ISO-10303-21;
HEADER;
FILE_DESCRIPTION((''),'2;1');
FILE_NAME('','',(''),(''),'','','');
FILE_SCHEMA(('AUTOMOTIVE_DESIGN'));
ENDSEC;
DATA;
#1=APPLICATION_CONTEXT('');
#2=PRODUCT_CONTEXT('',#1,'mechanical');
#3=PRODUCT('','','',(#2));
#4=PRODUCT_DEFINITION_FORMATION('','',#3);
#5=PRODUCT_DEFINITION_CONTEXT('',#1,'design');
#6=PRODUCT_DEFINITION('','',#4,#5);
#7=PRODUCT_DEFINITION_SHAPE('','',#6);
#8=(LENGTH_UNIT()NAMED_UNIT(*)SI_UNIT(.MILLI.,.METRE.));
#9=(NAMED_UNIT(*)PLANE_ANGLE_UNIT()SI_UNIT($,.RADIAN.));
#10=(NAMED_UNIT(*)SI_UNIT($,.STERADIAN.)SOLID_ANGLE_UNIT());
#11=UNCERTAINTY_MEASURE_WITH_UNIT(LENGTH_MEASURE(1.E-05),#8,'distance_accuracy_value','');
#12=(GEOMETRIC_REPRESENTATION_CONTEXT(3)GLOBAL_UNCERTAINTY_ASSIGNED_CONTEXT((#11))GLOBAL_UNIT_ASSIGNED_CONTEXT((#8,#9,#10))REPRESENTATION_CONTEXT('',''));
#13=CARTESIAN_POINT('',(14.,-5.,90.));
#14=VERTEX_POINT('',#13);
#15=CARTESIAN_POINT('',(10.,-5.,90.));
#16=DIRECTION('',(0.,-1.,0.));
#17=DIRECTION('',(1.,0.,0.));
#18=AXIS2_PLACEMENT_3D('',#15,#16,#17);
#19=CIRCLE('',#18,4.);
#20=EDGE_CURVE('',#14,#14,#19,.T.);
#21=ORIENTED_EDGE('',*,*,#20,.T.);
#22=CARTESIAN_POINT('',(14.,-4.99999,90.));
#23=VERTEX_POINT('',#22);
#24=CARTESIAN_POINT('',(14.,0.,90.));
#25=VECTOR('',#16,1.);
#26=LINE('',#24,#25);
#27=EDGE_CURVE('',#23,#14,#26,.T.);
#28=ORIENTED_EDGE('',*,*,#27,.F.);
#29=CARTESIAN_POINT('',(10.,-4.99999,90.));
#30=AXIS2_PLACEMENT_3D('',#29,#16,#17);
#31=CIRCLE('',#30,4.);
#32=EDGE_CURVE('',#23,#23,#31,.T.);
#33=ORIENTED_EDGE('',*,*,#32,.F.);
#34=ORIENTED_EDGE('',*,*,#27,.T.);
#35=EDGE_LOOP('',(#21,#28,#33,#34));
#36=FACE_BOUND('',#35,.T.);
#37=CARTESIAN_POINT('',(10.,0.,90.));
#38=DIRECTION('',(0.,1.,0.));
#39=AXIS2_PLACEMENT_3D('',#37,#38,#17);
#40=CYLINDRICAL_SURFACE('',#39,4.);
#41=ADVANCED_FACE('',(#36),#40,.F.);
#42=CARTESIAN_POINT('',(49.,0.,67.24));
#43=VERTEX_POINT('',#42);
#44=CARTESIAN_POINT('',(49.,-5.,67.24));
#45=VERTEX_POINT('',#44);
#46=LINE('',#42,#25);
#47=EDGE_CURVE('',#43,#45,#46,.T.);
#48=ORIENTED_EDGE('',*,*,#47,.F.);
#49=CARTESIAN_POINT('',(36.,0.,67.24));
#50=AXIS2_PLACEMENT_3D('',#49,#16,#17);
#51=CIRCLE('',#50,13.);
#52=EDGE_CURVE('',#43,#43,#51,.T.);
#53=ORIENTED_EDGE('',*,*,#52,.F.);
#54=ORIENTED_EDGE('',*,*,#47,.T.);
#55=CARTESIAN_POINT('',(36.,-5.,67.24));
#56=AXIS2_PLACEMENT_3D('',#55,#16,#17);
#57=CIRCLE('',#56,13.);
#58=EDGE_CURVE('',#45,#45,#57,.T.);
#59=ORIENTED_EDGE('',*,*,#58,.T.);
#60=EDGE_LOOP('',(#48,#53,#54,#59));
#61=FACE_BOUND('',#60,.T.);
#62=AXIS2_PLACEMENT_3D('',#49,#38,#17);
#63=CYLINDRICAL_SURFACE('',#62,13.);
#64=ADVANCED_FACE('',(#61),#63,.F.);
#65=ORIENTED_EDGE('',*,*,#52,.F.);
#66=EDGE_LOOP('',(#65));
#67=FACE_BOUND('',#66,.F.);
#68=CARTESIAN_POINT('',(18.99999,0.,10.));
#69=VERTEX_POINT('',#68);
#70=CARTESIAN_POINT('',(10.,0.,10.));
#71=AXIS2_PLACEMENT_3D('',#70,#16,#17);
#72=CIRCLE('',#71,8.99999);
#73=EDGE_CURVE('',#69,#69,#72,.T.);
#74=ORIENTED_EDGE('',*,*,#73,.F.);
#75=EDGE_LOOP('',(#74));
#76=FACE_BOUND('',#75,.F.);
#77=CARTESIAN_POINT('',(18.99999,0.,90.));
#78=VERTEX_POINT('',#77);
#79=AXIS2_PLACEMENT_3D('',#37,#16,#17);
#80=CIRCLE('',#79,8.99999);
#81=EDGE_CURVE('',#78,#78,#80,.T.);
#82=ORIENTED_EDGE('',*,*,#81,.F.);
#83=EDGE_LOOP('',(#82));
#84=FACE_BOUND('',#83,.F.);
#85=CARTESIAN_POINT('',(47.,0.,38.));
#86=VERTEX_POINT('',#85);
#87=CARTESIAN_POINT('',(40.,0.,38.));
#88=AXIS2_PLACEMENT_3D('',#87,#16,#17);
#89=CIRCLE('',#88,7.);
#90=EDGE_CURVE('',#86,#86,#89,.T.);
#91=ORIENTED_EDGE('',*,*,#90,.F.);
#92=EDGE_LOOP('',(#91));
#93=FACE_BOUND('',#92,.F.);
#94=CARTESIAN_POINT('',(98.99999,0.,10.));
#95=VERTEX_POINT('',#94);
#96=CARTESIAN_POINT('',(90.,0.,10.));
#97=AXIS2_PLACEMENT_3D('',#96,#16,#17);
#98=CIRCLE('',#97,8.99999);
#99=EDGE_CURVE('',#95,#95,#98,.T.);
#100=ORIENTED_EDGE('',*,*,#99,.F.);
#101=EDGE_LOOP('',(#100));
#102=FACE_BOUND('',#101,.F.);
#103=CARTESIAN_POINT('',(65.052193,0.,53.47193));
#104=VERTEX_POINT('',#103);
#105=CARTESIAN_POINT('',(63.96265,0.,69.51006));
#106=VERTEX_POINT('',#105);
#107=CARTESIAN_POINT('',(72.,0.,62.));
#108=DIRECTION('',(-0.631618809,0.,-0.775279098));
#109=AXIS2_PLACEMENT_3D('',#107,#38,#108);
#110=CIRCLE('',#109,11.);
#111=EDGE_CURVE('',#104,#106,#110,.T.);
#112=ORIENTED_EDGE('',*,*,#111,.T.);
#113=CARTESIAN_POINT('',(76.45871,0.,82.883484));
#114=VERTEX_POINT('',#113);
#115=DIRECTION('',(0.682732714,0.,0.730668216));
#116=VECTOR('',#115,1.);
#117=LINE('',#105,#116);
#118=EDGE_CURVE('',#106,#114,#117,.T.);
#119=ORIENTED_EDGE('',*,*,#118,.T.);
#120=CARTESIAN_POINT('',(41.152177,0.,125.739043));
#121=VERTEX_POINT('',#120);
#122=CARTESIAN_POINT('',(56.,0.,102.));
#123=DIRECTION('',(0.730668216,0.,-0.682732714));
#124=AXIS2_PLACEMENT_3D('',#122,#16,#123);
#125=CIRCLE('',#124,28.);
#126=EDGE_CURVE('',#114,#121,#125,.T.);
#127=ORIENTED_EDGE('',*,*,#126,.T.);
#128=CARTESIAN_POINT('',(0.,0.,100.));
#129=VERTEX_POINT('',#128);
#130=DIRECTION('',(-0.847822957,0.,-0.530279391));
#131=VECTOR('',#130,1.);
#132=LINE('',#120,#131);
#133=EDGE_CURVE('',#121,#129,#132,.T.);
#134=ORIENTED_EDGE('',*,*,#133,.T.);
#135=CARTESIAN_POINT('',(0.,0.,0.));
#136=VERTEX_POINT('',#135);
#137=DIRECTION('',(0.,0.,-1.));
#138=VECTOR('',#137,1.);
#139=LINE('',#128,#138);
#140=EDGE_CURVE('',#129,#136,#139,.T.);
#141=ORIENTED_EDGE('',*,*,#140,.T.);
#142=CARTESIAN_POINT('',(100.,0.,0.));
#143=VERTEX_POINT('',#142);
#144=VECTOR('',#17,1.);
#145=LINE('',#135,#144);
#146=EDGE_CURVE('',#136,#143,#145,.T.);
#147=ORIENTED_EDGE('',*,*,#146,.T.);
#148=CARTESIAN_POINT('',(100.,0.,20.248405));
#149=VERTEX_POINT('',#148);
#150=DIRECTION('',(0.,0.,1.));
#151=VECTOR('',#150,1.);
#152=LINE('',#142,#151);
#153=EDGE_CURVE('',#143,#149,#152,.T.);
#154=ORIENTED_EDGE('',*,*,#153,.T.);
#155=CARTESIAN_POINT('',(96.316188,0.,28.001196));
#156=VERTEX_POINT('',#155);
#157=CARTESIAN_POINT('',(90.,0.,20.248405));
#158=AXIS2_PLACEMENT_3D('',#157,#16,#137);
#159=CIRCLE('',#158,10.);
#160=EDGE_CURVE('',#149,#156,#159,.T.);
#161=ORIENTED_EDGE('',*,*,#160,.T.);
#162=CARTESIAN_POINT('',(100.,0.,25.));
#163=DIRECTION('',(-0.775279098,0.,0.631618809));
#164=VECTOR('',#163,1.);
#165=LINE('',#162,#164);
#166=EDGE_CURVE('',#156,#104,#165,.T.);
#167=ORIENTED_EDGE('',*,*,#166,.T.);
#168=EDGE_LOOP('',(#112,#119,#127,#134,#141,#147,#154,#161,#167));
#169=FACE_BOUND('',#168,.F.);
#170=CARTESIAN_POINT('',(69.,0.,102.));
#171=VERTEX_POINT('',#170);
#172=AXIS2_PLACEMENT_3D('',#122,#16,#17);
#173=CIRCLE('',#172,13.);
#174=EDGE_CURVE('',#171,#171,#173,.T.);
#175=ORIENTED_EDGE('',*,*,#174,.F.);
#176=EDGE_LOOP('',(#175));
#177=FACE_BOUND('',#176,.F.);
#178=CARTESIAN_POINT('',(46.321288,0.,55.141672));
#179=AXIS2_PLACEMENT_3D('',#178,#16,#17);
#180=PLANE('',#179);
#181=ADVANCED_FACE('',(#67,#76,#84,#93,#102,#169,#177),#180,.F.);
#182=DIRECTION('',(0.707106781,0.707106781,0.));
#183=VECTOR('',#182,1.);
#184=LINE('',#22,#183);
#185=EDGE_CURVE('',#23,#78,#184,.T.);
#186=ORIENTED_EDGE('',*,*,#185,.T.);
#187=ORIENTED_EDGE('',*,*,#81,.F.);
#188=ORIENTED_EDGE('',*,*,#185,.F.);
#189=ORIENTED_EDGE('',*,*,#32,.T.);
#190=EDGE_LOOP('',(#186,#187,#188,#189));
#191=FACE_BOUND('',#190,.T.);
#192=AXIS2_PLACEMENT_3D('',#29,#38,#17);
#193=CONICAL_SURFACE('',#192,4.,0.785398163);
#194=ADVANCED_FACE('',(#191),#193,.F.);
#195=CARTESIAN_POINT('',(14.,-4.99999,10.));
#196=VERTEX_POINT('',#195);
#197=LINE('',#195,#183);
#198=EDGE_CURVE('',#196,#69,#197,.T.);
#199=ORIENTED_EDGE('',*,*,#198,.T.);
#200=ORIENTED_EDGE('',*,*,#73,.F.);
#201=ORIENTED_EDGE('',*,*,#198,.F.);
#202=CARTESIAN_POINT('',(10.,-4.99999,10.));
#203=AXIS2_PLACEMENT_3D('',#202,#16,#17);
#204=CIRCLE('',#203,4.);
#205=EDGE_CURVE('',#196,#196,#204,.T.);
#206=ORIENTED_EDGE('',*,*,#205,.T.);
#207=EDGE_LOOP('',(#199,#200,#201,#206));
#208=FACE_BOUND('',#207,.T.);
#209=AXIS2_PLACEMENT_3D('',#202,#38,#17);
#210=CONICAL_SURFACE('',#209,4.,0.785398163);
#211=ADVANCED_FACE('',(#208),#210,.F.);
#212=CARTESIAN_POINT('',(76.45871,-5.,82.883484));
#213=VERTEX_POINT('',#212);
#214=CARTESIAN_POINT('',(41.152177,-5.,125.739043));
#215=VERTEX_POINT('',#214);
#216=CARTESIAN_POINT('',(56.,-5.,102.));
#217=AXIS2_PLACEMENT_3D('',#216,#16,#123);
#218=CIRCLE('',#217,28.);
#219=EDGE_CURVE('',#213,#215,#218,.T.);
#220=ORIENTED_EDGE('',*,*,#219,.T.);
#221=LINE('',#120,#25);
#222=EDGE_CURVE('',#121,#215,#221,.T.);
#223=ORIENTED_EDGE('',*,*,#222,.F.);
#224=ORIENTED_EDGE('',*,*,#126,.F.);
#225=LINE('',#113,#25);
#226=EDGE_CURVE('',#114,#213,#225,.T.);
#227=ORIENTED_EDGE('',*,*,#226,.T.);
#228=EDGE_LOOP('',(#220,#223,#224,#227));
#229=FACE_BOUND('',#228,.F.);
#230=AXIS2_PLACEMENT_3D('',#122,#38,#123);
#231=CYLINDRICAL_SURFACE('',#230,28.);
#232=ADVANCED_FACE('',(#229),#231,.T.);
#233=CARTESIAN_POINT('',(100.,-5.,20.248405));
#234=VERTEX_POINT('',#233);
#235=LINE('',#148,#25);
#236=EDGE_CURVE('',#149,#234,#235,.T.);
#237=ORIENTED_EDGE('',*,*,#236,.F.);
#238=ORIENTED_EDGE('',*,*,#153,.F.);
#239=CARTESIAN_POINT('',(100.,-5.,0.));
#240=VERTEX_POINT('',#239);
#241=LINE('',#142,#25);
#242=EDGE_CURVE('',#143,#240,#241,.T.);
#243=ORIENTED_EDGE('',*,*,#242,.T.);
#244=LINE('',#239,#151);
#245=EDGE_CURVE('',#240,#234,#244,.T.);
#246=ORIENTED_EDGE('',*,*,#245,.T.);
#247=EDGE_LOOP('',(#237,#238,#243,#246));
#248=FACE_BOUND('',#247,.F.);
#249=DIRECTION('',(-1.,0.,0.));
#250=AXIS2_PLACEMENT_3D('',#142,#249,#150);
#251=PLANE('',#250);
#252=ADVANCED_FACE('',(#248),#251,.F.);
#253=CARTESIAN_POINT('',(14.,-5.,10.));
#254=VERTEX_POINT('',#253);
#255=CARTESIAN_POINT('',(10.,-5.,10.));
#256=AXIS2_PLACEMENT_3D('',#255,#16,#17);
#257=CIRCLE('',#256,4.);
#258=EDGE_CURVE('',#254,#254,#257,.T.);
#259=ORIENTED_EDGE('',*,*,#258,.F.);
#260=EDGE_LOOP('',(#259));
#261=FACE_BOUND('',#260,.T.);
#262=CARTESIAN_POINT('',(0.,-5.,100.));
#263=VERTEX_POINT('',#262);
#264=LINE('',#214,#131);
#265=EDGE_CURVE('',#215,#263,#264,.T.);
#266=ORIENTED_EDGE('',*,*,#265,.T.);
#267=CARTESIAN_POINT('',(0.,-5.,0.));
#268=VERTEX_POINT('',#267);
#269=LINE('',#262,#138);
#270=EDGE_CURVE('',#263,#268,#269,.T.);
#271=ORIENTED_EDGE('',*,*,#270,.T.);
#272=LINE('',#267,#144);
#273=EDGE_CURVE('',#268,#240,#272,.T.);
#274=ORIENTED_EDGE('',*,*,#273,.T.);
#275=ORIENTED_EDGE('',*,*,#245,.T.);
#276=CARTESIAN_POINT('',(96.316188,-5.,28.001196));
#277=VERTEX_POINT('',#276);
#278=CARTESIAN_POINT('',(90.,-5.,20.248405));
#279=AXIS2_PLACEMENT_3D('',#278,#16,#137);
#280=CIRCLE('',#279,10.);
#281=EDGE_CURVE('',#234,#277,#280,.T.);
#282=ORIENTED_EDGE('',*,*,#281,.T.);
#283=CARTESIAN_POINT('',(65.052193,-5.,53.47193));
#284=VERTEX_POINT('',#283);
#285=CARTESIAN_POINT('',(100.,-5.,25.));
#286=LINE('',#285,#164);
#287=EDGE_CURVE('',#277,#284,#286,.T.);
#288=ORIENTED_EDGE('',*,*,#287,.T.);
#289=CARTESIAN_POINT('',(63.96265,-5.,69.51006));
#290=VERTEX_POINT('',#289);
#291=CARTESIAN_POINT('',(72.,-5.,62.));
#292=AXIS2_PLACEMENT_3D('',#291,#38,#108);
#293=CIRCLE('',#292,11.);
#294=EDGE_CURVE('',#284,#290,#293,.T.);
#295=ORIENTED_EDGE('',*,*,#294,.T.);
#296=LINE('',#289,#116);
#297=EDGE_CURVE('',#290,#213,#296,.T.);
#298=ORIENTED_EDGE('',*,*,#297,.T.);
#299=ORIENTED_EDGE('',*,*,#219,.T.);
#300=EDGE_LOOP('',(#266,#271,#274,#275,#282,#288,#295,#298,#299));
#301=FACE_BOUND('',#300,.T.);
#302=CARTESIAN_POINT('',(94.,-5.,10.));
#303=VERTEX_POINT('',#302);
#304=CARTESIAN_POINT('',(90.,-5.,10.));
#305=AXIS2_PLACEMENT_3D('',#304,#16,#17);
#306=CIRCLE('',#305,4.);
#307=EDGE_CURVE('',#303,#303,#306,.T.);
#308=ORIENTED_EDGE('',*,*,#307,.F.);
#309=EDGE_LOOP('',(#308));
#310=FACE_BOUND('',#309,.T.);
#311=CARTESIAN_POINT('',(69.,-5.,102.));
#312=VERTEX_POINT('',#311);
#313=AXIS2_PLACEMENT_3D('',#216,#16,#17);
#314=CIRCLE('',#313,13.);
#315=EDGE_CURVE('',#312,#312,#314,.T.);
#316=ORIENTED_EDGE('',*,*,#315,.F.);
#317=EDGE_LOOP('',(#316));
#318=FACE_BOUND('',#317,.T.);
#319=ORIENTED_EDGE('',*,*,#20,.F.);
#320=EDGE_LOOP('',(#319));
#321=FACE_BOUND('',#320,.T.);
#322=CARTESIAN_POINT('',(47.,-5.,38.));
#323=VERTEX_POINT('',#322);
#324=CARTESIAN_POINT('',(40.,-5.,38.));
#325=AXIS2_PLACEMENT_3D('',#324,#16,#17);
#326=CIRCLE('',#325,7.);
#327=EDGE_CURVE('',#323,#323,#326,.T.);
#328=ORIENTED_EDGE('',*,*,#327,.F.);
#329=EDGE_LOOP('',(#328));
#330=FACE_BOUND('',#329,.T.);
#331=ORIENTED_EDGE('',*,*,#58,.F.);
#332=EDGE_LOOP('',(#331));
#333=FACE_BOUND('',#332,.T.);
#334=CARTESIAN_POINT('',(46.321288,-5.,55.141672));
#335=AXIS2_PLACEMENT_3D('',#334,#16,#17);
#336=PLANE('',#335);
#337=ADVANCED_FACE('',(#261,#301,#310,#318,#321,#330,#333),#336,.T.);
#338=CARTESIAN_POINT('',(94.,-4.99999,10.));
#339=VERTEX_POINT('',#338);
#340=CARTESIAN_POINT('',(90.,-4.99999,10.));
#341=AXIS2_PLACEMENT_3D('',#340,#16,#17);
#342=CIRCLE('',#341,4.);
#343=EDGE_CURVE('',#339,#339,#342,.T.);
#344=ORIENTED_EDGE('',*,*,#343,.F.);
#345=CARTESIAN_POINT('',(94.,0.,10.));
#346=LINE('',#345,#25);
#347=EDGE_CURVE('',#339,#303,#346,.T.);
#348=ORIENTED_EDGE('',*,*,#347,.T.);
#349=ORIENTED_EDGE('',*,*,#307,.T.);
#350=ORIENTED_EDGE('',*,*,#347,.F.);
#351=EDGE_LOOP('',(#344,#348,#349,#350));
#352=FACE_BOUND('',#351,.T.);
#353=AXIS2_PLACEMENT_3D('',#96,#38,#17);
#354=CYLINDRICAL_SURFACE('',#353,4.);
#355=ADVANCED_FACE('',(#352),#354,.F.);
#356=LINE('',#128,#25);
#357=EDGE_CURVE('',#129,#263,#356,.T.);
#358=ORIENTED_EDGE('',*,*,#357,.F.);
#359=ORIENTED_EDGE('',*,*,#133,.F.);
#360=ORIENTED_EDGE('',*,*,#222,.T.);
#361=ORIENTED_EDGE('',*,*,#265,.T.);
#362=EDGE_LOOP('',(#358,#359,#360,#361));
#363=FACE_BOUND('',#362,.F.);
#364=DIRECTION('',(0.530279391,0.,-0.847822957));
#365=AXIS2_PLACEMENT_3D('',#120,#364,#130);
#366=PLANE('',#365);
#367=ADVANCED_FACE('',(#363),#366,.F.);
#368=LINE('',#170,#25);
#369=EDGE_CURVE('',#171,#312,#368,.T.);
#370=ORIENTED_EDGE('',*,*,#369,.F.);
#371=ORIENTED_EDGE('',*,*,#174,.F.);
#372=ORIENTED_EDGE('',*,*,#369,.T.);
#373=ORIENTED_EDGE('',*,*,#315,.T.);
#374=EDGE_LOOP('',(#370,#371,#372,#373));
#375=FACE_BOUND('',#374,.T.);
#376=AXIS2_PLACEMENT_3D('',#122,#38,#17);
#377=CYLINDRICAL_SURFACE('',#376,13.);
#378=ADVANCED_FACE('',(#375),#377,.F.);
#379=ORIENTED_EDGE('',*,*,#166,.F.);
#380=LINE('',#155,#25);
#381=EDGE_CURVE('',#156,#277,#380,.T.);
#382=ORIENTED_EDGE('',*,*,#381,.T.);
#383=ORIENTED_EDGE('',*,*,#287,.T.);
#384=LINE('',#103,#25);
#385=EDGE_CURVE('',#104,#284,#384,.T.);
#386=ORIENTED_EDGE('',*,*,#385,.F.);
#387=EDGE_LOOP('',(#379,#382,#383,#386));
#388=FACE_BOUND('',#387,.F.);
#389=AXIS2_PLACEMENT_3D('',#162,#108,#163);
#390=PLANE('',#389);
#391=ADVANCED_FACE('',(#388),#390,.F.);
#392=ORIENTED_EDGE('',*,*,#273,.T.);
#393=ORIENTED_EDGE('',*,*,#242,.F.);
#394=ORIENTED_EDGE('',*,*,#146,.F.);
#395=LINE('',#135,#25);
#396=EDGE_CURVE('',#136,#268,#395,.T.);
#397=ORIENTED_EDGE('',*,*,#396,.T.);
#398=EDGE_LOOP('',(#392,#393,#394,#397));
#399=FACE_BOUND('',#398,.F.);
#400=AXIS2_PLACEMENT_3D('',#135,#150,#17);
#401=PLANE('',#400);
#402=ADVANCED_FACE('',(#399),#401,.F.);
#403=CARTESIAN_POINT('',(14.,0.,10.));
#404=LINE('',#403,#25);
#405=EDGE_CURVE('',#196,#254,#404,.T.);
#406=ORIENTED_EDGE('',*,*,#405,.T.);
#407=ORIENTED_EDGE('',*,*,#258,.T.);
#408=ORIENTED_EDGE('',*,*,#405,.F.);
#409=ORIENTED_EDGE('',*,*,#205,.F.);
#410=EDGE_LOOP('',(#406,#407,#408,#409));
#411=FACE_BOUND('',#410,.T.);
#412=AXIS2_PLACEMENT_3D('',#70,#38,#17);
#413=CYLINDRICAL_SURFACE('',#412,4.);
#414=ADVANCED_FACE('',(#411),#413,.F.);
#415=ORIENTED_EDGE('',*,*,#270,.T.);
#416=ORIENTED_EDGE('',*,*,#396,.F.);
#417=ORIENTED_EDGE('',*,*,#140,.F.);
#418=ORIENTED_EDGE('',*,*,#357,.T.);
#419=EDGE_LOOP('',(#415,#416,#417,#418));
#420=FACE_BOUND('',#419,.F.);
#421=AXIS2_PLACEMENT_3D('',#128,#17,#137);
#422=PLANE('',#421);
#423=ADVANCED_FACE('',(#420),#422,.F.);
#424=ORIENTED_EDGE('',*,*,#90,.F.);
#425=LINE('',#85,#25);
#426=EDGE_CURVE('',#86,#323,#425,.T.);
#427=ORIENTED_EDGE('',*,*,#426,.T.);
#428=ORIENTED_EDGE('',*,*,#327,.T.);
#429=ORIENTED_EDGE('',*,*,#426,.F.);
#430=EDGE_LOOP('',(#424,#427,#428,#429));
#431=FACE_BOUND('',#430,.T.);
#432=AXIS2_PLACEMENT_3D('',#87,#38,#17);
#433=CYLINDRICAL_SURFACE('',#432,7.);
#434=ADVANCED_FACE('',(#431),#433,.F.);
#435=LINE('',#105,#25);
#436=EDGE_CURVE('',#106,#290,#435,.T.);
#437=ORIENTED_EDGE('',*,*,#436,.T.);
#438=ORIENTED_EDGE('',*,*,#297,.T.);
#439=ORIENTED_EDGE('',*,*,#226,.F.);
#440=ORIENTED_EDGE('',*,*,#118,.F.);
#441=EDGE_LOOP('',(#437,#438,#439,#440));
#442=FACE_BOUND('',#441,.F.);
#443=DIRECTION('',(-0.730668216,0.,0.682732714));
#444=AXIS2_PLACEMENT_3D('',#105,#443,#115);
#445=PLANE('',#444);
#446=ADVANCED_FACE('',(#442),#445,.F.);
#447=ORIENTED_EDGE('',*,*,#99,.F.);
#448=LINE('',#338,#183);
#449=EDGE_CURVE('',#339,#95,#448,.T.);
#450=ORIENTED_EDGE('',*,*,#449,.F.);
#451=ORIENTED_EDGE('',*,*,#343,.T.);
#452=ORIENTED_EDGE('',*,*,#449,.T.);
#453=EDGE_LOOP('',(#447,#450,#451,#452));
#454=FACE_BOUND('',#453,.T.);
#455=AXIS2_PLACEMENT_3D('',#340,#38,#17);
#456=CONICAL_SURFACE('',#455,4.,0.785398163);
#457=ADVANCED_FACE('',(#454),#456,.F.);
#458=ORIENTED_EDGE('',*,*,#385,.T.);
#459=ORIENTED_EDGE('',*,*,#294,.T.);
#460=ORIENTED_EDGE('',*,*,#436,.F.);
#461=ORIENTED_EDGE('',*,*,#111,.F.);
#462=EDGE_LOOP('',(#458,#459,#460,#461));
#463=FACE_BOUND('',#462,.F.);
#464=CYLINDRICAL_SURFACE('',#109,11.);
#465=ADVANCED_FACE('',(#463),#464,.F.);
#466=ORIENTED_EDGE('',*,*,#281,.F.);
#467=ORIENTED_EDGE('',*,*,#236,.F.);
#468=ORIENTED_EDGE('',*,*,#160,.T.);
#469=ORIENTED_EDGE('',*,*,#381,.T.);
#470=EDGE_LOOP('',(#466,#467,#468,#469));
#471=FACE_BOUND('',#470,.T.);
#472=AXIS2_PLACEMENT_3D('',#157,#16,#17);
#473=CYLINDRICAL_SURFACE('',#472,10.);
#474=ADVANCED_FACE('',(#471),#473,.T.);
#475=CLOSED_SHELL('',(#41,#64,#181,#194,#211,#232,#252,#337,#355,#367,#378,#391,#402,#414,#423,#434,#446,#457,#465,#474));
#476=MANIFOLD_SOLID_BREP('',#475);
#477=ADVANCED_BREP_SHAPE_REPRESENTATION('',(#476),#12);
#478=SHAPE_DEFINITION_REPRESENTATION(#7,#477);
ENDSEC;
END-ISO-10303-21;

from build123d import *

# Parameters (mm, degrees)
F0_R     = 4
F0_R_2   = 7
F0_R_3   = 13
F1_DEPTH = 5
F2_SIZE  = 4.99999
F3_R     = 10


# Not quite as in the source:
# - a fillet or chamfer is up to 0.001 mm smaller than in the source, because OpenCascade refuses the exact size


with BuildPart() as f1:
    # F0 (on Front) → F1 (new body)
    with BuildSketch(Plane.XZ):
        with BuildLine():
            Line((0, 100), (0, 0))
            Line((0, 0), (100, 0))
            Line((100, 0), (100, 25))
            Line((100, 25), (65.0521931045, 53.4719299169))
            ThreePointArc((65.0521931045, 53.4719299169), (61.0252955601, 61.2544381602), (63.9626496251, 69.51005985))
            Line((63.9626496251, 69.51005985), (76.4587100452, 82.8834840181))
            ThreePointArc((76.4587100452, 82.8834840181), (77.6106511533, 119.803925318), (41.1521770426, 125.7390428077))
            Line((41.1521770426, 125.7390428077), (0, 100))
        make_face()
        with Locations((10, 10)):
            Circle(F0_R, mode=Mode.SUBTRACT)
        with Locations((40, 38)):
            Circle(F0_R_2, mode=Mode.SUBTRACT)
        with Locations((90, 10)):
            Circle(F0_R, mode=Mode.SUBTRACT)
        with Locations((10, 90)):
            Circle(F0_R, mode=Mode.SUBTRACT)
        with Locations((36, 67.24)):
            Circle(F0_R_3, mode=Mode.SUBTRACT)
        with Locations((56, 102)):
            Circle(F0_R_3, mode=Mode.SUBTRACT)
    extrude(amount=F1_DEPTH)

    # F2 (size 5 in the source; OpenCascade refuses exactly that, so slightly less here)
    f2_edges = [f1.edges().sort_by_distance(p)[0] for p in [
        (86, 0, 10),
        (6, 0, 10),
        (6, 0, 90),
    ]]
    chamfer(f2_edges, length=F2_SIZE)

    # F3
    f3_edges = [f1.edges().sort_by_distance(p)[0] for p in [
        (100, -2.5, 25),
    ]]
    fillet(f3_edges, radius=F3_R)


solid = f1.part
